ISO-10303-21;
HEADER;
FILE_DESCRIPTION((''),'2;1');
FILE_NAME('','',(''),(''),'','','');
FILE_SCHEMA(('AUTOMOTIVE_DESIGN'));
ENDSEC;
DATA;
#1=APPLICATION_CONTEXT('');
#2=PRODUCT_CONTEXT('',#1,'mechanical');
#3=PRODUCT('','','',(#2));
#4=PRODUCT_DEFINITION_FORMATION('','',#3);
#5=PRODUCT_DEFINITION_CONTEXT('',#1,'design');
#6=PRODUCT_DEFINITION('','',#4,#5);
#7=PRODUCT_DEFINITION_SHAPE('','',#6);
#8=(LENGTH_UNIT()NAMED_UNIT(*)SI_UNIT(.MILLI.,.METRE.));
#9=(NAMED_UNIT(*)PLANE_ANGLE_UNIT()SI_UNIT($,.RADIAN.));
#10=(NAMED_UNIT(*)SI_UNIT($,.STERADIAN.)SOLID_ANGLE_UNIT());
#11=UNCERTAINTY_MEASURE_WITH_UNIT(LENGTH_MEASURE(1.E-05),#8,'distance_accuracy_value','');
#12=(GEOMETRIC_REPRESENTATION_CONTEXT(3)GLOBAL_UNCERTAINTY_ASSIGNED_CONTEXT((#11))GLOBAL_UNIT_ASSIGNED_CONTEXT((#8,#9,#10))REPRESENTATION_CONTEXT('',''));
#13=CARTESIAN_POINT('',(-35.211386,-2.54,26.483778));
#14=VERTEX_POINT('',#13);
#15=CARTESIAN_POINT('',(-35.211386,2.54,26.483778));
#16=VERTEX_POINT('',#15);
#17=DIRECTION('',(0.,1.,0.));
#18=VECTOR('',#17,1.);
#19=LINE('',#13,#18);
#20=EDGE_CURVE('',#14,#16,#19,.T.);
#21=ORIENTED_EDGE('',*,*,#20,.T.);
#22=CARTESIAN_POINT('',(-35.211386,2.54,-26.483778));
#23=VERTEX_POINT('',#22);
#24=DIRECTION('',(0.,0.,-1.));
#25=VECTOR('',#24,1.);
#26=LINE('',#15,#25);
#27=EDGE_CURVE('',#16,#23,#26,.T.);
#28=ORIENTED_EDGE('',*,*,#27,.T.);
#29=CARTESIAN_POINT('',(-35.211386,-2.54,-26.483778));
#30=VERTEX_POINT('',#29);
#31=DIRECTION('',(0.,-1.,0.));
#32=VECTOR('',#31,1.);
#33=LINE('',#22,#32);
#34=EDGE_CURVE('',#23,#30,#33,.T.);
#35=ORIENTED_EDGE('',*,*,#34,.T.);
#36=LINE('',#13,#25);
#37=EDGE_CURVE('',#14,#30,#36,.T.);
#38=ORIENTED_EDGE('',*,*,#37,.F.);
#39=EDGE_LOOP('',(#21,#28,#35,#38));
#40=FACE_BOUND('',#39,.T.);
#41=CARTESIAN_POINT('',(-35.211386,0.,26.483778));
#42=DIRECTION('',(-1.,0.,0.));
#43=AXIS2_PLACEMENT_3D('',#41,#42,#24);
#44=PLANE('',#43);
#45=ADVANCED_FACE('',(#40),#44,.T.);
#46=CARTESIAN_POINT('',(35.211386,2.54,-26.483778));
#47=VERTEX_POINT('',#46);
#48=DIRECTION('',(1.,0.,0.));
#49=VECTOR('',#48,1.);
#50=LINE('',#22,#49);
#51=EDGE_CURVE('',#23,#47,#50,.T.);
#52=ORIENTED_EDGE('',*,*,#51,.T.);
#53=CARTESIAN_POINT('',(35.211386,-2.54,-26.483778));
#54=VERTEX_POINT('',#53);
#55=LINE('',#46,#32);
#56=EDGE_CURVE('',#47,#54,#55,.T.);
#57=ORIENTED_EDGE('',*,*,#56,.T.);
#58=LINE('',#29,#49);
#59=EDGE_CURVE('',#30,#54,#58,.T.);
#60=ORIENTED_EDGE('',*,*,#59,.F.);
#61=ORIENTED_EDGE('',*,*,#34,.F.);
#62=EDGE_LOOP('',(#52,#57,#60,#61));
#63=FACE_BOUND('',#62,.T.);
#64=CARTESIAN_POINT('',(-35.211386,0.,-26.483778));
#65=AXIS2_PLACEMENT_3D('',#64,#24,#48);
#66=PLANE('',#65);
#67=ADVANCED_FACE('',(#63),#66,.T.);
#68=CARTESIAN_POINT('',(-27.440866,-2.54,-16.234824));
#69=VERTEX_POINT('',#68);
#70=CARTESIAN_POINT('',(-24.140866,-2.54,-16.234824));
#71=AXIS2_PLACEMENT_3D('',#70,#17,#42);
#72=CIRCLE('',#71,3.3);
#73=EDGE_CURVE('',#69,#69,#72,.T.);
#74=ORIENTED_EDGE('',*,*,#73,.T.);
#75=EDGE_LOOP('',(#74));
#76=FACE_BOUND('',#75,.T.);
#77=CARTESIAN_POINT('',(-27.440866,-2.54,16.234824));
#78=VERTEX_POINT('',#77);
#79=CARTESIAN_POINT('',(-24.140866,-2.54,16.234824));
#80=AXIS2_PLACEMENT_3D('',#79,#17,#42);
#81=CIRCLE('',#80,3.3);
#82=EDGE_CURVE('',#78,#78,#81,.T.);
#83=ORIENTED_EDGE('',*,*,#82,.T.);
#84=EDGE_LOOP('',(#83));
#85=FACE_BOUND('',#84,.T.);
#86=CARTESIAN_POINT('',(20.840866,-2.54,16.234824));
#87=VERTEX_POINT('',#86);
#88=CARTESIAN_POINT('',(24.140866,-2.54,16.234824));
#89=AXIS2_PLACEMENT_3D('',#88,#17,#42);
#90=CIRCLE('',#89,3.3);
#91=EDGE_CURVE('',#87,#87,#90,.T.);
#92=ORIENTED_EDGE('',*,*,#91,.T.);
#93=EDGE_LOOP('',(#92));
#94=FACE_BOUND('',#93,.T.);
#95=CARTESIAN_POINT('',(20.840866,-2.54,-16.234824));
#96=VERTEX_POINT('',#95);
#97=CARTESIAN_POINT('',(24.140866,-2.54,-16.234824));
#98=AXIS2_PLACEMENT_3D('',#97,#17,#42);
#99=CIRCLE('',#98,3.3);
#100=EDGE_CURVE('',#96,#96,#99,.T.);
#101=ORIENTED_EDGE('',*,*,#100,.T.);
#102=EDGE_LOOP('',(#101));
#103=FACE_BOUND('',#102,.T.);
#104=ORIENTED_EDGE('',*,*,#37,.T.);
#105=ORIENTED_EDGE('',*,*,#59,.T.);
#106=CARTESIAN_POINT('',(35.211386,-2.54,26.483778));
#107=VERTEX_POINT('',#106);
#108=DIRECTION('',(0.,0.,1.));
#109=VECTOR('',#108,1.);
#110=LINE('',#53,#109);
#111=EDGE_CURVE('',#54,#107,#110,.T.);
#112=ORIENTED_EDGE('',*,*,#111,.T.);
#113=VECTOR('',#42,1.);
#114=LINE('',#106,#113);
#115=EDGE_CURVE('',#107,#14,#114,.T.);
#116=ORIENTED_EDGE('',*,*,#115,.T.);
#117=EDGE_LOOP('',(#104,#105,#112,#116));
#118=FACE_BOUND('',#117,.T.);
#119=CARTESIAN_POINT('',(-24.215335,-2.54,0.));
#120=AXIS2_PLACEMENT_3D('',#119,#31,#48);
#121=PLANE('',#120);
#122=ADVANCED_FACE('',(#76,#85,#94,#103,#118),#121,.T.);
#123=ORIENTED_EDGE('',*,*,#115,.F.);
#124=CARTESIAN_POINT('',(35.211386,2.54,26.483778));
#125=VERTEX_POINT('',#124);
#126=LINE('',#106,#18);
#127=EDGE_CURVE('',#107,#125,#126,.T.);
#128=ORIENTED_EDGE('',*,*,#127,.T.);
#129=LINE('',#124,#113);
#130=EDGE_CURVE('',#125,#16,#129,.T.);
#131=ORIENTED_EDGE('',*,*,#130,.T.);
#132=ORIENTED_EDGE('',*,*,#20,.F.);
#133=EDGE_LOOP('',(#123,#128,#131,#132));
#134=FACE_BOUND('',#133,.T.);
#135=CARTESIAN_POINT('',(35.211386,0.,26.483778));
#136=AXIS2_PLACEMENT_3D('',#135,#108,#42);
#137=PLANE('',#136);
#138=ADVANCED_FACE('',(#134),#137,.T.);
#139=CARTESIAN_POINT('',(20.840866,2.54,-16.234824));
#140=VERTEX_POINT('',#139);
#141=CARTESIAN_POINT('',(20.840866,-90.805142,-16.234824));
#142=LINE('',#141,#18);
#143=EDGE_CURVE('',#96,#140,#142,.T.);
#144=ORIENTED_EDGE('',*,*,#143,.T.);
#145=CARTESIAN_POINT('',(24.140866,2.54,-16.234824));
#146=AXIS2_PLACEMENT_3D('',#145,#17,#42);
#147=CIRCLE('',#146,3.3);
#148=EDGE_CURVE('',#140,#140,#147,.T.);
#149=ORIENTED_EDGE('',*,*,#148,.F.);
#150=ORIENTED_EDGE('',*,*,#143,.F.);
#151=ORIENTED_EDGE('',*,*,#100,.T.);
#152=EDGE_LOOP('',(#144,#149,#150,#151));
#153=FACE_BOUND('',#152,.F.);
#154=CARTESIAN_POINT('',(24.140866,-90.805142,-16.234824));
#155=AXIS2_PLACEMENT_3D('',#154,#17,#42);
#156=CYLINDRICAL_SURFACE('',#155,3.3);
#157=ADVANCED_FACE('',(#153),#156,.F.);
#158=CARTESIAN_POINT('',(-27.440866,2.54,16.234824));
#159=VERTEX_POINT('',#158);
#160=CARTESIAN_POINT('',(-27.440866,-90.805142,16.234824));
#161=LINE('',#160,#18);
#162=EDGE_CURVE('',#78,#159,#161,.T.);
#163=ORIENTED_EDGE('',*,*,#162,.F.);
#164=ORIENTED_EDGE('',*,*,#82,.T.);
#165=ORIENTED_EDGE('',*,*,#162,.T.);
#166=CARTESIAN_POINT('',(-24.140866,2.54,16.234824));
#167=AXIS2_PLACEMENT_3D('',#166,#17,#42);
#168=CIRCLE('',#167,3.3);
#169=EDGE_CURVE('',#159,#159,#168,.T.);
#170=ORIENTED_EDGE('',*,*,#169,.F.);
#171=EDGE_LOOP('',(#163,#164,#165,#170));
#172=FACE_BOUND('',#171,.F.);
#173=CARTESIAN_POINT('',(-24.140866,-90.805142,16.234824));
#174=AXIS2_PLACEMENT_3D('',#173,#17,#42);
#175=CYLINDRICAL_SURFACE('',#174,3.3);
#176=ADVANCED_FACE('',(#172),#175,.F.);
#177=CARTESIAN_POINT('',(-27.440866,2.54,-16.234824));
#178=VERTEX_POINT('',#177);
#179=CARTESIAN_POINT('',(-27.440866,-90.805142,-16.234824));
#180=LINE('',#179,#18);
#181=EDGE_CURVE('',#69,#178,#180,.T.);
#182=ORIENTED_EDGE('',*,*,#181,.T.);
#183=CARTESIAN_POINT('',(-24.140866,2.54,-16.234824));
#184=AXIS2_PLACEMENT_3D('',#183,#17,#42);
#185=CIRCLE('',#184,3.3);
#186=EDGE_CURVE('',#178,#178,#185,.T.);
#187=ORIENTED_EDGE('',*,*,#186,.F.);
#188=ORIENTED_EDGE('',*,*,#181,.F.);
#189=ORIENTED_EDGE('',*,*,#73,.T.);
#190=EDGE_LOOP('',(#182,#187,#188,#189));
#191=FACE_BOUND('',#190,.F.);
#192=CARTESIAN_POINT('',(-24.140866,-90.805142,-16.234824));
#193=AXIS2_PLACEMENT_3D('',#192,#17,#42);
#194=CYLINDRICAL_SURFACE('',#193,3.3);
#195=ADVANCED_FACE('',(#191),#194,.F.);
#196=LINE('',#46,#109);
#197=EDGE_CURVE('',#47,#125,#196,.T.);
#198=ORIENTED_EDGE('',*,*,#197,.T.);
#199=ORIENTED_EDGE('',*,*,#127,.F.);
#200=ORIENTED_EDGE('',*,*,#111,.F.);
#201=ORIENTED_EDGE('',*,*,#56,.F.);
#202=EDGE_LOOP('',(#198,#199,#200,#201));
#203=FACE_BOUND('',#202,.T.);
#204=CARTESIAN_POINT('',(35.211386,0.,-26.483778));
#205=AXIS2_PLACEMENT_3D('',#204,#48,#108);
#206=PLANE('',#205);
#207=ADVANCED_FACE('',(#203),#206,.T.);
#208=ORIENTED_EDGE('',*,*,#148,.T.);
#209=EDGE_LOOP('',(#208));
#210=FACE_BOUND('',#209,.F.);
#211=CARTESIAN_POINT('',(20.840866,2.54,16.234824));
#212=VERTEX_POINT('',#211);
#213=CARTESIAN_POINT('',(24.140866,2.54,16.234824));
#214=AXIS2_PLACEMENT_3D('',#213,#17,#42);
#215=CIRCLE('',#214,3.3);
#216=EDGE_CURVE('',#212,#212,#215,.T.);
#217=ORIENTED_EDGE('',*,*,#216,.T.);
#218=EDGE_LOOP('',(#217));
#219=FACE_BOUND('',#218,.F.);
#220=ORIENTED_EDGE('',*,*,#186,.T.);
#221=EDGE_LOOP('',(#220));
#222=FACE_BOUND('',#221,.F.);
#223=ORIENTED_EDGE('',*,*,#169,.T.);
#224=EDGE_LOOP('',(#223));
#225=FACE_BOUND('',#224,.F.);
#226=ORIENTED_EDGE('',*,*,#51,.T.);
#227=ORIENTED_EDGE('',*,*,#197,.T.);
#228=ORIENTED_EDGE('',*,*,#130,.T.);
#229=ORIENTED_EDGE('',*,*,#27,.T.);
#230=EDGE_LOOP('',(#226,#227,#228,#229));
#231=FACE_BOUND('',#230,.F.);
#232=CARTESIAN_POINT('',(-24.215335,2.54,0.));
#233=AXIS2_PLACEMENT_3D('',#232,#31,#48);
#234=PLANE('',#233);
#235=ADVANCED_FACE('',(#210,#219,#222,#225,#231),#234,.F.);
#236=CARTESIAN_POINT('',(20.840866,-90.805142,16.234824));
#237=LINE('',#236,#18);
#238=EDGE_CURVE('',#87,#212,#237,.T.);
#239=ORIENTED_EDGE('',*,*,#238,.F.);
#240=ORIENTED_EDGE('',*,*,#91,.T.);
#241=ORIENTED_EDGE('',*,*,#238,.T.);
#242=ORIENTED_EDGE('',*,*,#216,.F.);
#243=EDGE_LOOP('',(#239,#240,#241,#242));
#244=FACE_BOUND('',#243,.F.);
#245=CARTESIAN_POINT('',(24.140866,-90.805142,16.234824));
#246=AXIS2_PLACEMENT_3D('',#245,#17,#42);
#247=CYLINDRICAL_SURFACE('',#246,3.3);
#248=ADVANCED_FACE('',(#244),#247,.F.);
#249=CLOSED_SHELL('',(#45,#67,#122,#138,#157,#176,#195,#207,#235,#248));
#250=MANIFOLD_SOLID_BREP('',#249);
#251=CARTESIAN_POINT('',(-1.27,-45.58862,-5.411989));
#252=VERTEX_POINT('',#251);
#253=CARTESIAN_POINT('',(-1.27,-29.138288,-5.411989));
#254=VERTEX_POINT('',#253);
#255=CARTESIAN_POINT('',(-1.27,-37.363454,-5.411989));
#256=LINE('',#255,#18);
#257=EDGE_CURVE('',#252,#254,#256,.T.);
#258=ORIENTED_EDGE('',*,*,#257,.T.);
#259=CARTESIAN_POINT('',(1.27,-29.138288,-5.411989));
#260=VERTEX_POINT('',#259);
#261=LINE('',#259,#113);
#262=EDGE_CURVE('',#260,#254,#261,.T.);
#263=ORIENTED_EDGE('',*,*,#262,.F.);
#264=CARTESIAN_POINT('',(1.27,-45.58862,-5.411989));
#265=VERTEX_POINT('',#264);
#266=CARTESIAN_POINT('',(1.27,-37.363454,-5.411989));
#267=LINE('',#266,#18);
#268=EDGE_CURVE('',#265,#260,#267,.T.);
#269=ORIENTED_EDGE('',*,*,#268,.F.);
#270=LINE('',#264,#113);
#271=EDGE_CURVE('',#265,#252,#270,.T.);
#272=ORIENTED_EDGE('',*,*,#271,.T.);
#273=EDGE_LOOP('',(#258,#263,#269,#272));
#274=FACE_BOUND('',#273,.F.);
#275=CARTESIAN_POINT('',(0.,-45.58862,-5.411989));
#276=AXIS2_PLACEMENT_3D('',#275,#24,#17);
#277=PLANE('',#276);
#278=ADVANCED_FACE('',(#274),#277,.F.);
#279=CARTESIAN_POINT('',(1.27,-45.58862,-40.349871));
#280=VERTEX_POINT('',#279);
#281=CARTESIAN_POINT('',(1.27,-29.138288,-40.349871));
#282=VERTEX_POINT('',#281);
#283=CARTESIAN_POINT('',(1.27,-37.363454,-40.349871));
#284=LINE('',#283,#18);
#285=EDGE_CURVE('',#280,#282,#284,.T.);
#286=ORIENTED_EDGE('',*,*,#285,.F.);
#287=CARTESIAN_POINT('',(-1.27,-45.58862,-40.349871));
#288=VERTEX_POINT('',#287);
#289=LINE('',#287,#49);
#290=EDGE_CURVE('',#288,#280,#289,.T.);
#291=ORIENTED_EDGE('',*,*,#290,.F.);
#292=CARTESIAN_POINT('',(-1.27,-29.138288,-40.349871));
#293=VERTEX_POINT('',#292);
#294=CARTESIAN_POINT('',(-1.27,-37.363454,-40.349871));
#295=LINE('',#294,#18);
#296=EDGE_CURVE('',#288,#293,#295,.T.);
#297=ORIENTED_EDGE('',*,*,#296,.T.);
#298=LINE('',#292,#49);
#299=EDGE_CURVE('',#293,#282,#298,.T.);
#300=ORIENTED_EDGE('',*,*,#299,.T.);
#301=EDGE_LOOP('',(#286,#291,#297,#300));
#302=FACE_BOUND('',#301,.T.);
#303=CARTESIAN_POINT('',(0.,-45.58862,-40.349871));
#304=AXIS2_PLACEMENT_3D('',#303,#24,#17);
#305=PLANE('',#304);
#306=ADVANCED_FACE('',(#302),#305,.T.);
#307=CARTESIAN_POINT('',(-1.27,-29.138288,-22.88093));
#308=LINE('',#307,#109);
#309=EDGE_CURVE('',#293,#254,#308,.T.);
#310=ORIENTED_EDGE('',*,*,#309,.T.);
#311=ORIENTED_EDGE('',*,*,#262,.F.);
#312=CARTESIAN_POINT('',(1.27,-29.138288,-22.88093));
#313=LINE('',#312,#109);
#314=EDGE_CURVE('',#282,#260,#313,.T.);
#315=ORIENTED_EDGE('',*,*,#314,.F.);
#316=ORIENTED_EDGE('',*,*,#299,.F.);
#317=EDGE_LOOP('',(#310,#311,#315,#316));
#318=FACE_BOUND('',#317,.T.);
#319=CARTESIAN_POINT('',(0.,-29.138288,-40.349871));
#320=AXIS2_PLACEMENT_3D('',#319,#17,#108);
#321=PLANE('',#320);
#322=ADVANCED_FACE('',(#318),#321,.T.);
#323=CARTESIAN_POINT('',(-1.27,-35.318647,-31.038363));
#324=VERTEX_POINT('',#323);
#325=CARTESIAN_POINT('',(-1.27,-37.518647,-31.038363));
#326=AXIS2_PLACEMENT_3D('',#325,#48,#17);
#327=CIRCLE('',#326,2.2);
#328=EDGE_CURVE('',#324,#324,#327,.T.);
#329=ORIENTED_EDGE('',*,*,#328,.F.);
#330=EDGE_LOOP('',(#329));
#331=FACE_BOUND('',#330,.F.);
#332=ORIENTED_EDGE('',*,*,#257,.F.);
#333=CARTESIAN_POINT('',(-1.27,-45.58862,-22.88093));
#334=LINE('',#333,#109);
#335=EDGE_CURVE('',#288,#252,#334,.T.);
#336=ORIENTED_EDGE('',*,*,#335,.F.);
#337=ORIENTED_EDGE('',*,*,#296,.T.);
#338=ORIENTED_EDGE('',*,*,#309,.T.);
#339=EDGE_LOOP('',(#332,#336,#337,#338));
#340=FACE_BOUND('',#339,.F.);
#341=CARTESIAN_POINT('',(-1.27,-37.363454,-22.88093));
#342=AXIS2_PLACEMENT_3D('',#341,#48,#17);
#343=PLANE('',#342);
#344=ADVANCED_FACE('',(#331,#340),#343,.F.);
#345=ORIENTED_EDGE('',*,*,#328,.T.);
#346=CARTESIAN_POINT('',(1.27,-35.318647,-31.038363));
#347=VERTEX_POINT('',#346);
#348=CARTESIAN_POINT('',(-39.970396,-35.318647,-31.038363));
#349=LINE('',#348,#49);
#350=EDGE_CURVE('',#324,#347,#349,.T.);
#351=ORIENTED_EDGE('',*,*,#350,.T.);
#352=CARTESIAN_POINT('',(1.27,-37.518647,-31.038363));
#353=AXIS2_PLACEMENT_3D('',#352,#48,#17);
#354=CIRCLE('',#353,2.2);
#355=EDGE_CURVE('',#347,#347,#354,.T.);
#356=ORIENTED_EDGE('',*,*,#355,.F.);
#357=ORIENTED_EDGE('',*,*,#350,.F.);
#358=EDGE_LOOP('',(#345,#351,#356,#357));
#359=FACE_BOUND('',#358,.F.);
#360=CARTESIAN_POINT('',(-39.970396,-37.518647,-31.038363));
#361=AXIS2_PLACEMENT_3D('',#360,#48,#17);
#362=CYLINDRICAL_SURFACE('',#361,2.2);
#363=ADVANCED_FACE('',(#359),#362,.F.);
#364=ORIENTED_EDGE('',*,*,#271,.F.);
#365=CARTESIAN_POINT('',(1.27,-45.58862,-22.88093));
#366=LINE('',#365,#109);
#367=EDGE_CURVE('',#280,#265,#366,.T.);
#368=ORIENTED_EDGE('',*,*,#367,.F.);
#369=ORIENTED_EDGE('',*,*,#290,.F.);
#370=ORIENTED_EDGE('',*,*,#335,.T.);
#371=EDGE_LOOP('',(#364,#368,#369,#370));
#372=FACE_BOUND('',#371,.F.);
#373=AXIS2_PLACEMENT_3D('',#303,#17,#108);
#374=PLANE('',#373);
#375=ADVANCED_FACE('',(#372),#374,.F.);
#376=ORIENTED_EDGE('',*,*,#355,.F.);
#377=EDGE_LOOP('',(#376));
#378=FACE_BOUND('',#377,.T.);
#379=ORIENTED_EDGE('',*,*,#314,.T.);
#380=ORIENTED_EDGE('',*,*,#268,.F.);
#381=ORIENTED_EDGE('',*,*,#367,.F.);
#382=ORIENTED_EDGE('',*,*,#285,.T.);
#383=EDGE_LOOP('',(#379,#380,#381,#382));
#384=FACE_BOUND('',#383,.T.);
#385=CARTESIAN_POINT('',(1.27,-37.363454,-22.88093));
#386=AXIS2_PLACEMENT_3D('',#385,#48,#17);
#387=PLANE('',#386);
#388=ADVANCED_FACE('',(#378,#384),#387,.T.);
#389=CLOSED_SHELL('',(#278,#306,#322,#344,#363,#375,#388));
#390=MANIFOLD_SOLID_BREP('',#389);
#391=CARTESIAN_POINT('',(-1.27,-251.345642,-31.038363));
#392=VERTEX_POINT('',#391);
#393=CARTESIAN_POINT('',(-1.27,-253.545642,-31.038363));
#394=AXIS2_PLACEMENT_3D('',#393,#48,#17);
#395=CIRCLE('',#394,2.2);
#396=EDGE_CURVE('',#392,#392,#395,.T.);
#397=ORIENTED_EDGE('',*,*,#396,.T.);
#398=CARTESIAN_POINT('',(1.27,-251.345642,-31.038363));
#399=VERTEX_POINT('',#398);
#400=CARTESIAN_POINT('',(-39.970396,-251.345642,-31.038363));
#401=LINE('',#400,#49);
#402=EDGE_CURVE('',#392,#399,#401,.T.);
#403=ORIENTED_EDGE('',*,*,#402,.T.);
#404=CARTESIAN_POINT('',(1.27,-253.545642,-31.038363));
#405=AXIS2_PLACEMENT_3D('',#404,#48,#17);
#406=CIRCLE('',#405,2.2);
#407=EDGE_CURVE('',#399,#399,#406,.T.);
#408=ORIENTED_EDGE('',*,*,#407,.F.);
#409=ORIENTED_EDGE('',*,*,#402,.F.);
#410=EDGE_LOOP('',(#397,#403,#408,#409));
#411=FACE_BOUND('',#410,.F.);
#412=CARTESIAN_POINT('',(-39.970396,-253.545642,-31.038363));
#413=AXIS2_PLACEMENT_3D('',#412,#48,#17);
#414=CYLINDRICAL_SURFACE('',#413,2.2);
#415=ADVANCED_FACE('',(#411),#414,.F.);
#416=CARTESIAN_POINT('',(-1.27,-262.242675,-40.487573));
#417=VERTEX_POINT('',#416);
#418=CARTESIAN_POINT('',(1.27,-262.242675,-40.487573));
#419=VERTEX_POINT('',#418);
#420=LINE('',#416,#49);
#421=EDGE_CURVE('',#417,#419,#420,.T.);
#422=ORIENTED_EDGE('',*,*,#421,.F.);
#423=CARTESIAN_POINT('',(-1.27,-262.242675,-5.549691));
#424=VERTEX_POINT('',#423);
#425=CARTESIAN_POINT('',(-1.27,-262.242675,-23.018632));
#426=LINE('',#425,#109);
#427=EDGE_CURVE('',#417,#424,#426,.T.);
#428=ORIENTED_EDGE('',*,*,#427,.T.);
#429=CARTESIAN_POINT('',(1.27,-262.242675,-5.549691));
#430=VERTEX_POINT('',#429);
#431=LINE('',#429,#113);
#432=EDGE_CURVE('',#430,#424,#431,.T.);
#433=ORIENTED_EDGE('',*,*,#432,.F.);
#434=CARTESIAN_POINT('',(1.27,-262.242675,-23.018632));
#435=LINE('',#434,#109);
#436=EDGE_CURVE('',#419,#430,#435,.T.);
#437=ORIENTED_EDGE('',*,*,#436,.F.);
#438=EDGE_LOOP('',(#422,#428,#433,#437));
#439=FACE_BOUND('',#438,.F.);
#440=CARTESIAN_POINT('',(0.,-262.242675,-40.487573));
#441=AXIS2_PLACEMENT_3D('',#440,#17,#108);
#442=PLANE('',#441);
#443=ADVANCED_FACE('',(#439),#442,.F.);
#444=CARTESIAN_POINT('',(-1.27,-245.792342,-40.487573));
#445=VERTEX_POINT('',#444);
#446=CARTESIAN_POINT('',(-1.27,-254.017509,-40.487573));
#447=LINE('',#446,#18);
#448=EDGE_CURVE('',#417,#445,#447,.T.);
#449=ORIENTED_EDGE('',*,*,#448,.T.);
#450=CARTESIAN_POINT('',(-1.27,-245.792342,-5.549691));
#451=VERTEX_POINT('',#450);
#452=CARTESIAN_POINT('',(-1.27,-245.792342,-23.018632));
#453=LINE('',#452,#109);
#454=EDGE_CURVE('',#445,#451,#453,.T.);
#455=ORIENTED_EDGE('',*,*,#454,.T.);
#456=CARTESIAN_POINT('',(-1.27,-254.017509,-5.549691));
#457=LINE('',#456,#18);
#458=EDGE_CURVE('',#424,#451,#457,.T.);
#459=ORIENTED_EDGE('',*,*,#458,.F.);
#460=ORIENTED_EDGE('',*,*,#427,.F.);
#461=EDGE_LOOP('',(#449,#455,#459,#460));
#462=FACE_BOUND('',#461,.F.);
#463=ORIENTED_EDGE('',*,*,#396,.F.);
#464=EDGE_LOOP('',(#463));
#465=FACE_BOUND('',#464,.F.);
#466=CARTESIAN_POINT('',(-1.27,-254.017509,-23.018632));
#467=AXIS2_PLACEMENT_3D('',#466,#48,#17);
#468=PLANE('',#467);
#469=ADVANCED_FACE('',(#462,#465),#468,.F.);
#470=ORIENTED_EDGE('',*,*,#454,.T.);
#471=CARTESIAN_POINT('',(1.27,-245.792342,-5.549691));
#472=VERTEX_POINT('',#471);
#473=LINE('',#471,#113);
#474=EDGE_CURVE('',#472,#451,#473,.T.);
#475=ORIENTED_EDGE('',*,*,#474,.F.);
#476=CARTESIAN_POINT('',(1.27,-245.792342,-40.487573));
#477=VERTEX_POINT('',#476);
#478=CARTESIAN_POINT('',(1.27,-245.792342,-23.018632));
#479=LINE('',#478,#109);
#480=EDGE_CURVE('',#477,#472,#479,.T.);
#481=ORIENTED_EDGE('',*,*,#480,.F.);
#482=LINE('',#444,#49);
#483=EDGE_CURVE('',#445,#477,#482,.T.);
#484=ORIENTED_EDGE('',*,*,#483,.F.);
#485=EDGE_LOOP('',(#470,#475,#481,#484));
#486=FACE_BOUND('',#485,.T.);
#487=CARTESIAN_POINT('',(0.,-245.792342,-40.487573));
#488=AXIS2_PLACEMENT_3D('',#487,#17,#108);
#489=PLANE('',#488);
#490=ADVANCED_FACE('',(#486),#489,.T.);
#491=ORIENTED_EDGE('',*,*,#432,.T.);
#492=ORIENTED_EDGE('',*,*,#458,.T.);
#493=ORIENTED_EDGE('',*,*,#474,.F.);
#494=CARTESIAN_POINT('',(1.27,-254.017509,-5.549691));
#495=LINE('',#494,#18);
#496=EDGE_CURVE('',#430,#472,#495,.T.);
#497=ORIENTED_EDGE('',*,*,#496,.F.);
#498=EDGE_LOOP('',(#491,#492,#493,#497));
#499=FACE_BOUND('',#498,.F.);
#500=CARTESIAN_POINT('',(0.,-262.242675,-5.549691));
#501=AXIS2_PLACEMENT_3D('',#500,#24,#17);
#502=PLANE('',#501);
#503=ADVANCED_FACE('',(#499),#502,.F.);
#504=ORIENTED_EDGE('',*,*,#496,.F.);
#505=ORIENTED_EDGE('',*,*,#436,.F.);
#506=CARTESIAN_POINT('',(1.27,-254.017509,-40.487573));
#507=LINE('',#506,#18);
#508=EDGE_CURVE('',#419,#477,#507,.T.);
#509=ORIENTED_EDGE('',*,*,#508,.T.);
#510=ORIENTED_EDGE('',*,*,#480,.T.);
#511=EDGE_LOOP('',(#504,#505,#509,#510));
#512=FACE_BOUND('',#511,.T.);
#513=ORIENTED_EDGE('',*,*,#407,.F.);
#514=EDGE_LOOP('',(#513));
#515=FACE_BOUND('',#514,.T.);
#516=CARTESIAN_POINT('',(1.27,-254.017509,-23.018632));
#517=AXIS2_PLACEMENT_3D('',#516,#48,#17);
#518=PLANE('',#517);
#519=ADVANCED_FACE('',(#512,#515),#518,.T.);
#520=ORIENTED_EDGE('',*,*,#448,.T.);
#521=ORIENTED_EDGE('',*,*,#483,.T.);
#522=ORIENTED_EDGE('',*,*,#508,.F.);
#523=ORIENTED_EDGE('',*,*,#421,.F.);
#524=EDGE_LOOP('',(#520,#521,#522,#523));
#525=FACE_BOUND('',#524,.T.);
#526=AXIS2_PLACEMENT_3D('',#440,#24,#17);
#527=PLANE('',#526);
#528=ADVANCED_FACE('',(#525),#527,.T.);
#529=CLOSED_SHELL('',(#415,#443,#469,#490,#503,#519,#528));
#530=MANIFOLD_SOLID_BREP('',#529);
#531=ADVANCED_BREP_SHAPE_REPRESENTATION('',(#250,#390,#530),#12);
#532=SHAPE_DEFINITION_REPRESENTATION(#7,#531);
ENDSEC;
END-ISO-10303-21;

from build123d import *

# Parameters (mm, degrees)
F1_DEPTH  = 2.54
F3_D      = 6.6
F7_W      = 16.4503324777
F7_H      = 34.9378818646
F8_DEPTH  = 1.27
F10_D     = 4.4
F11_W     = 16.4503324777
F11_H     = 34.9378818646
F12_DEPTH = 1.27
F14_D     = 4.4


# Not quite as in the source:
# - the program builds the solid bodies; features that only make, move or delete a surface that nothing else refers to are left out


with BuildPart() as f1:
    # F0 (on Front) → F1 (new body, symmetric)
    with BuildSketch(Plane.XZ):
        Polygon((-25.0618057636, 18.8499050002), (-35.2113864935, 26.4837776091), (-35.2113864935, -26.4837776091), (0, 0), align=None)
        Polygon((35.2113864935, 26.4837776091), (-35.2113864935, 26.4837776091), (-25.0618057636, 18.8499050002), (0, 0), align=None)
        Polygon((35.2113864935, -26.4837776091), (35.2113864935, 26.4837776091), (0, 0), align=None)
        Polygon((0, 0), (-35.2113864935, -26.4837776091), (35.2113864935, -26.4837776091), align=None)
    extrude(amount=F1_DEPTH, both=True)

    # F3 (through all)
    with Locations(Plane.XZ.offset(2.54)):
        with Locations((-24.1408664733, 16.2348244339), (24.1408664733, 16.2348244339), (24.1408664733, -16.2348244339), (-24.1408664733, -16.2348244339)):
            Hole(F3_D / 2)


with BuildPart() as f8:
    # F7 (on Right) → F8 (new body, symmetric)
    with BuildSketch(Plane.YZ):
        with Locations((-37.3634537682, -22.8809299879)):
            Rectangle(F7_W, F7_H)
    extrude(amount=F8_DEPTH, both=True)

    # F10 (through all)
    with Locations(Plane(origin=(-1.27, 0, 0), x_dir=(0, -1, 0), z_dir=(-1, 0, 0))):
        with Locations((37.5186465681, -31.0383625329)):
            Hole(F10_D / 2)


with BuildPart() as f12:
    # F11 (on Right) → F12 (new body, symmetric)
    with BuildSketch(Plane.YZ):
        with Locations((-254.0175085887, -23.0186316185)):
            Rectangle(F11_W, F11_H)
    extrude(amount=F12_DEPTH, both=True)

    # F14 (through all)
    with Locations(Plane(origin=(-1.27, 0, 0), x_dir=(0, -1, 0), z_dir=(-1, 0, 0))):
        with Locations((253.5456418991, -31.0383625329)):
            Hole(F14_D / 2)


solid = Compound([f1.part, f8.part, f12.part])
